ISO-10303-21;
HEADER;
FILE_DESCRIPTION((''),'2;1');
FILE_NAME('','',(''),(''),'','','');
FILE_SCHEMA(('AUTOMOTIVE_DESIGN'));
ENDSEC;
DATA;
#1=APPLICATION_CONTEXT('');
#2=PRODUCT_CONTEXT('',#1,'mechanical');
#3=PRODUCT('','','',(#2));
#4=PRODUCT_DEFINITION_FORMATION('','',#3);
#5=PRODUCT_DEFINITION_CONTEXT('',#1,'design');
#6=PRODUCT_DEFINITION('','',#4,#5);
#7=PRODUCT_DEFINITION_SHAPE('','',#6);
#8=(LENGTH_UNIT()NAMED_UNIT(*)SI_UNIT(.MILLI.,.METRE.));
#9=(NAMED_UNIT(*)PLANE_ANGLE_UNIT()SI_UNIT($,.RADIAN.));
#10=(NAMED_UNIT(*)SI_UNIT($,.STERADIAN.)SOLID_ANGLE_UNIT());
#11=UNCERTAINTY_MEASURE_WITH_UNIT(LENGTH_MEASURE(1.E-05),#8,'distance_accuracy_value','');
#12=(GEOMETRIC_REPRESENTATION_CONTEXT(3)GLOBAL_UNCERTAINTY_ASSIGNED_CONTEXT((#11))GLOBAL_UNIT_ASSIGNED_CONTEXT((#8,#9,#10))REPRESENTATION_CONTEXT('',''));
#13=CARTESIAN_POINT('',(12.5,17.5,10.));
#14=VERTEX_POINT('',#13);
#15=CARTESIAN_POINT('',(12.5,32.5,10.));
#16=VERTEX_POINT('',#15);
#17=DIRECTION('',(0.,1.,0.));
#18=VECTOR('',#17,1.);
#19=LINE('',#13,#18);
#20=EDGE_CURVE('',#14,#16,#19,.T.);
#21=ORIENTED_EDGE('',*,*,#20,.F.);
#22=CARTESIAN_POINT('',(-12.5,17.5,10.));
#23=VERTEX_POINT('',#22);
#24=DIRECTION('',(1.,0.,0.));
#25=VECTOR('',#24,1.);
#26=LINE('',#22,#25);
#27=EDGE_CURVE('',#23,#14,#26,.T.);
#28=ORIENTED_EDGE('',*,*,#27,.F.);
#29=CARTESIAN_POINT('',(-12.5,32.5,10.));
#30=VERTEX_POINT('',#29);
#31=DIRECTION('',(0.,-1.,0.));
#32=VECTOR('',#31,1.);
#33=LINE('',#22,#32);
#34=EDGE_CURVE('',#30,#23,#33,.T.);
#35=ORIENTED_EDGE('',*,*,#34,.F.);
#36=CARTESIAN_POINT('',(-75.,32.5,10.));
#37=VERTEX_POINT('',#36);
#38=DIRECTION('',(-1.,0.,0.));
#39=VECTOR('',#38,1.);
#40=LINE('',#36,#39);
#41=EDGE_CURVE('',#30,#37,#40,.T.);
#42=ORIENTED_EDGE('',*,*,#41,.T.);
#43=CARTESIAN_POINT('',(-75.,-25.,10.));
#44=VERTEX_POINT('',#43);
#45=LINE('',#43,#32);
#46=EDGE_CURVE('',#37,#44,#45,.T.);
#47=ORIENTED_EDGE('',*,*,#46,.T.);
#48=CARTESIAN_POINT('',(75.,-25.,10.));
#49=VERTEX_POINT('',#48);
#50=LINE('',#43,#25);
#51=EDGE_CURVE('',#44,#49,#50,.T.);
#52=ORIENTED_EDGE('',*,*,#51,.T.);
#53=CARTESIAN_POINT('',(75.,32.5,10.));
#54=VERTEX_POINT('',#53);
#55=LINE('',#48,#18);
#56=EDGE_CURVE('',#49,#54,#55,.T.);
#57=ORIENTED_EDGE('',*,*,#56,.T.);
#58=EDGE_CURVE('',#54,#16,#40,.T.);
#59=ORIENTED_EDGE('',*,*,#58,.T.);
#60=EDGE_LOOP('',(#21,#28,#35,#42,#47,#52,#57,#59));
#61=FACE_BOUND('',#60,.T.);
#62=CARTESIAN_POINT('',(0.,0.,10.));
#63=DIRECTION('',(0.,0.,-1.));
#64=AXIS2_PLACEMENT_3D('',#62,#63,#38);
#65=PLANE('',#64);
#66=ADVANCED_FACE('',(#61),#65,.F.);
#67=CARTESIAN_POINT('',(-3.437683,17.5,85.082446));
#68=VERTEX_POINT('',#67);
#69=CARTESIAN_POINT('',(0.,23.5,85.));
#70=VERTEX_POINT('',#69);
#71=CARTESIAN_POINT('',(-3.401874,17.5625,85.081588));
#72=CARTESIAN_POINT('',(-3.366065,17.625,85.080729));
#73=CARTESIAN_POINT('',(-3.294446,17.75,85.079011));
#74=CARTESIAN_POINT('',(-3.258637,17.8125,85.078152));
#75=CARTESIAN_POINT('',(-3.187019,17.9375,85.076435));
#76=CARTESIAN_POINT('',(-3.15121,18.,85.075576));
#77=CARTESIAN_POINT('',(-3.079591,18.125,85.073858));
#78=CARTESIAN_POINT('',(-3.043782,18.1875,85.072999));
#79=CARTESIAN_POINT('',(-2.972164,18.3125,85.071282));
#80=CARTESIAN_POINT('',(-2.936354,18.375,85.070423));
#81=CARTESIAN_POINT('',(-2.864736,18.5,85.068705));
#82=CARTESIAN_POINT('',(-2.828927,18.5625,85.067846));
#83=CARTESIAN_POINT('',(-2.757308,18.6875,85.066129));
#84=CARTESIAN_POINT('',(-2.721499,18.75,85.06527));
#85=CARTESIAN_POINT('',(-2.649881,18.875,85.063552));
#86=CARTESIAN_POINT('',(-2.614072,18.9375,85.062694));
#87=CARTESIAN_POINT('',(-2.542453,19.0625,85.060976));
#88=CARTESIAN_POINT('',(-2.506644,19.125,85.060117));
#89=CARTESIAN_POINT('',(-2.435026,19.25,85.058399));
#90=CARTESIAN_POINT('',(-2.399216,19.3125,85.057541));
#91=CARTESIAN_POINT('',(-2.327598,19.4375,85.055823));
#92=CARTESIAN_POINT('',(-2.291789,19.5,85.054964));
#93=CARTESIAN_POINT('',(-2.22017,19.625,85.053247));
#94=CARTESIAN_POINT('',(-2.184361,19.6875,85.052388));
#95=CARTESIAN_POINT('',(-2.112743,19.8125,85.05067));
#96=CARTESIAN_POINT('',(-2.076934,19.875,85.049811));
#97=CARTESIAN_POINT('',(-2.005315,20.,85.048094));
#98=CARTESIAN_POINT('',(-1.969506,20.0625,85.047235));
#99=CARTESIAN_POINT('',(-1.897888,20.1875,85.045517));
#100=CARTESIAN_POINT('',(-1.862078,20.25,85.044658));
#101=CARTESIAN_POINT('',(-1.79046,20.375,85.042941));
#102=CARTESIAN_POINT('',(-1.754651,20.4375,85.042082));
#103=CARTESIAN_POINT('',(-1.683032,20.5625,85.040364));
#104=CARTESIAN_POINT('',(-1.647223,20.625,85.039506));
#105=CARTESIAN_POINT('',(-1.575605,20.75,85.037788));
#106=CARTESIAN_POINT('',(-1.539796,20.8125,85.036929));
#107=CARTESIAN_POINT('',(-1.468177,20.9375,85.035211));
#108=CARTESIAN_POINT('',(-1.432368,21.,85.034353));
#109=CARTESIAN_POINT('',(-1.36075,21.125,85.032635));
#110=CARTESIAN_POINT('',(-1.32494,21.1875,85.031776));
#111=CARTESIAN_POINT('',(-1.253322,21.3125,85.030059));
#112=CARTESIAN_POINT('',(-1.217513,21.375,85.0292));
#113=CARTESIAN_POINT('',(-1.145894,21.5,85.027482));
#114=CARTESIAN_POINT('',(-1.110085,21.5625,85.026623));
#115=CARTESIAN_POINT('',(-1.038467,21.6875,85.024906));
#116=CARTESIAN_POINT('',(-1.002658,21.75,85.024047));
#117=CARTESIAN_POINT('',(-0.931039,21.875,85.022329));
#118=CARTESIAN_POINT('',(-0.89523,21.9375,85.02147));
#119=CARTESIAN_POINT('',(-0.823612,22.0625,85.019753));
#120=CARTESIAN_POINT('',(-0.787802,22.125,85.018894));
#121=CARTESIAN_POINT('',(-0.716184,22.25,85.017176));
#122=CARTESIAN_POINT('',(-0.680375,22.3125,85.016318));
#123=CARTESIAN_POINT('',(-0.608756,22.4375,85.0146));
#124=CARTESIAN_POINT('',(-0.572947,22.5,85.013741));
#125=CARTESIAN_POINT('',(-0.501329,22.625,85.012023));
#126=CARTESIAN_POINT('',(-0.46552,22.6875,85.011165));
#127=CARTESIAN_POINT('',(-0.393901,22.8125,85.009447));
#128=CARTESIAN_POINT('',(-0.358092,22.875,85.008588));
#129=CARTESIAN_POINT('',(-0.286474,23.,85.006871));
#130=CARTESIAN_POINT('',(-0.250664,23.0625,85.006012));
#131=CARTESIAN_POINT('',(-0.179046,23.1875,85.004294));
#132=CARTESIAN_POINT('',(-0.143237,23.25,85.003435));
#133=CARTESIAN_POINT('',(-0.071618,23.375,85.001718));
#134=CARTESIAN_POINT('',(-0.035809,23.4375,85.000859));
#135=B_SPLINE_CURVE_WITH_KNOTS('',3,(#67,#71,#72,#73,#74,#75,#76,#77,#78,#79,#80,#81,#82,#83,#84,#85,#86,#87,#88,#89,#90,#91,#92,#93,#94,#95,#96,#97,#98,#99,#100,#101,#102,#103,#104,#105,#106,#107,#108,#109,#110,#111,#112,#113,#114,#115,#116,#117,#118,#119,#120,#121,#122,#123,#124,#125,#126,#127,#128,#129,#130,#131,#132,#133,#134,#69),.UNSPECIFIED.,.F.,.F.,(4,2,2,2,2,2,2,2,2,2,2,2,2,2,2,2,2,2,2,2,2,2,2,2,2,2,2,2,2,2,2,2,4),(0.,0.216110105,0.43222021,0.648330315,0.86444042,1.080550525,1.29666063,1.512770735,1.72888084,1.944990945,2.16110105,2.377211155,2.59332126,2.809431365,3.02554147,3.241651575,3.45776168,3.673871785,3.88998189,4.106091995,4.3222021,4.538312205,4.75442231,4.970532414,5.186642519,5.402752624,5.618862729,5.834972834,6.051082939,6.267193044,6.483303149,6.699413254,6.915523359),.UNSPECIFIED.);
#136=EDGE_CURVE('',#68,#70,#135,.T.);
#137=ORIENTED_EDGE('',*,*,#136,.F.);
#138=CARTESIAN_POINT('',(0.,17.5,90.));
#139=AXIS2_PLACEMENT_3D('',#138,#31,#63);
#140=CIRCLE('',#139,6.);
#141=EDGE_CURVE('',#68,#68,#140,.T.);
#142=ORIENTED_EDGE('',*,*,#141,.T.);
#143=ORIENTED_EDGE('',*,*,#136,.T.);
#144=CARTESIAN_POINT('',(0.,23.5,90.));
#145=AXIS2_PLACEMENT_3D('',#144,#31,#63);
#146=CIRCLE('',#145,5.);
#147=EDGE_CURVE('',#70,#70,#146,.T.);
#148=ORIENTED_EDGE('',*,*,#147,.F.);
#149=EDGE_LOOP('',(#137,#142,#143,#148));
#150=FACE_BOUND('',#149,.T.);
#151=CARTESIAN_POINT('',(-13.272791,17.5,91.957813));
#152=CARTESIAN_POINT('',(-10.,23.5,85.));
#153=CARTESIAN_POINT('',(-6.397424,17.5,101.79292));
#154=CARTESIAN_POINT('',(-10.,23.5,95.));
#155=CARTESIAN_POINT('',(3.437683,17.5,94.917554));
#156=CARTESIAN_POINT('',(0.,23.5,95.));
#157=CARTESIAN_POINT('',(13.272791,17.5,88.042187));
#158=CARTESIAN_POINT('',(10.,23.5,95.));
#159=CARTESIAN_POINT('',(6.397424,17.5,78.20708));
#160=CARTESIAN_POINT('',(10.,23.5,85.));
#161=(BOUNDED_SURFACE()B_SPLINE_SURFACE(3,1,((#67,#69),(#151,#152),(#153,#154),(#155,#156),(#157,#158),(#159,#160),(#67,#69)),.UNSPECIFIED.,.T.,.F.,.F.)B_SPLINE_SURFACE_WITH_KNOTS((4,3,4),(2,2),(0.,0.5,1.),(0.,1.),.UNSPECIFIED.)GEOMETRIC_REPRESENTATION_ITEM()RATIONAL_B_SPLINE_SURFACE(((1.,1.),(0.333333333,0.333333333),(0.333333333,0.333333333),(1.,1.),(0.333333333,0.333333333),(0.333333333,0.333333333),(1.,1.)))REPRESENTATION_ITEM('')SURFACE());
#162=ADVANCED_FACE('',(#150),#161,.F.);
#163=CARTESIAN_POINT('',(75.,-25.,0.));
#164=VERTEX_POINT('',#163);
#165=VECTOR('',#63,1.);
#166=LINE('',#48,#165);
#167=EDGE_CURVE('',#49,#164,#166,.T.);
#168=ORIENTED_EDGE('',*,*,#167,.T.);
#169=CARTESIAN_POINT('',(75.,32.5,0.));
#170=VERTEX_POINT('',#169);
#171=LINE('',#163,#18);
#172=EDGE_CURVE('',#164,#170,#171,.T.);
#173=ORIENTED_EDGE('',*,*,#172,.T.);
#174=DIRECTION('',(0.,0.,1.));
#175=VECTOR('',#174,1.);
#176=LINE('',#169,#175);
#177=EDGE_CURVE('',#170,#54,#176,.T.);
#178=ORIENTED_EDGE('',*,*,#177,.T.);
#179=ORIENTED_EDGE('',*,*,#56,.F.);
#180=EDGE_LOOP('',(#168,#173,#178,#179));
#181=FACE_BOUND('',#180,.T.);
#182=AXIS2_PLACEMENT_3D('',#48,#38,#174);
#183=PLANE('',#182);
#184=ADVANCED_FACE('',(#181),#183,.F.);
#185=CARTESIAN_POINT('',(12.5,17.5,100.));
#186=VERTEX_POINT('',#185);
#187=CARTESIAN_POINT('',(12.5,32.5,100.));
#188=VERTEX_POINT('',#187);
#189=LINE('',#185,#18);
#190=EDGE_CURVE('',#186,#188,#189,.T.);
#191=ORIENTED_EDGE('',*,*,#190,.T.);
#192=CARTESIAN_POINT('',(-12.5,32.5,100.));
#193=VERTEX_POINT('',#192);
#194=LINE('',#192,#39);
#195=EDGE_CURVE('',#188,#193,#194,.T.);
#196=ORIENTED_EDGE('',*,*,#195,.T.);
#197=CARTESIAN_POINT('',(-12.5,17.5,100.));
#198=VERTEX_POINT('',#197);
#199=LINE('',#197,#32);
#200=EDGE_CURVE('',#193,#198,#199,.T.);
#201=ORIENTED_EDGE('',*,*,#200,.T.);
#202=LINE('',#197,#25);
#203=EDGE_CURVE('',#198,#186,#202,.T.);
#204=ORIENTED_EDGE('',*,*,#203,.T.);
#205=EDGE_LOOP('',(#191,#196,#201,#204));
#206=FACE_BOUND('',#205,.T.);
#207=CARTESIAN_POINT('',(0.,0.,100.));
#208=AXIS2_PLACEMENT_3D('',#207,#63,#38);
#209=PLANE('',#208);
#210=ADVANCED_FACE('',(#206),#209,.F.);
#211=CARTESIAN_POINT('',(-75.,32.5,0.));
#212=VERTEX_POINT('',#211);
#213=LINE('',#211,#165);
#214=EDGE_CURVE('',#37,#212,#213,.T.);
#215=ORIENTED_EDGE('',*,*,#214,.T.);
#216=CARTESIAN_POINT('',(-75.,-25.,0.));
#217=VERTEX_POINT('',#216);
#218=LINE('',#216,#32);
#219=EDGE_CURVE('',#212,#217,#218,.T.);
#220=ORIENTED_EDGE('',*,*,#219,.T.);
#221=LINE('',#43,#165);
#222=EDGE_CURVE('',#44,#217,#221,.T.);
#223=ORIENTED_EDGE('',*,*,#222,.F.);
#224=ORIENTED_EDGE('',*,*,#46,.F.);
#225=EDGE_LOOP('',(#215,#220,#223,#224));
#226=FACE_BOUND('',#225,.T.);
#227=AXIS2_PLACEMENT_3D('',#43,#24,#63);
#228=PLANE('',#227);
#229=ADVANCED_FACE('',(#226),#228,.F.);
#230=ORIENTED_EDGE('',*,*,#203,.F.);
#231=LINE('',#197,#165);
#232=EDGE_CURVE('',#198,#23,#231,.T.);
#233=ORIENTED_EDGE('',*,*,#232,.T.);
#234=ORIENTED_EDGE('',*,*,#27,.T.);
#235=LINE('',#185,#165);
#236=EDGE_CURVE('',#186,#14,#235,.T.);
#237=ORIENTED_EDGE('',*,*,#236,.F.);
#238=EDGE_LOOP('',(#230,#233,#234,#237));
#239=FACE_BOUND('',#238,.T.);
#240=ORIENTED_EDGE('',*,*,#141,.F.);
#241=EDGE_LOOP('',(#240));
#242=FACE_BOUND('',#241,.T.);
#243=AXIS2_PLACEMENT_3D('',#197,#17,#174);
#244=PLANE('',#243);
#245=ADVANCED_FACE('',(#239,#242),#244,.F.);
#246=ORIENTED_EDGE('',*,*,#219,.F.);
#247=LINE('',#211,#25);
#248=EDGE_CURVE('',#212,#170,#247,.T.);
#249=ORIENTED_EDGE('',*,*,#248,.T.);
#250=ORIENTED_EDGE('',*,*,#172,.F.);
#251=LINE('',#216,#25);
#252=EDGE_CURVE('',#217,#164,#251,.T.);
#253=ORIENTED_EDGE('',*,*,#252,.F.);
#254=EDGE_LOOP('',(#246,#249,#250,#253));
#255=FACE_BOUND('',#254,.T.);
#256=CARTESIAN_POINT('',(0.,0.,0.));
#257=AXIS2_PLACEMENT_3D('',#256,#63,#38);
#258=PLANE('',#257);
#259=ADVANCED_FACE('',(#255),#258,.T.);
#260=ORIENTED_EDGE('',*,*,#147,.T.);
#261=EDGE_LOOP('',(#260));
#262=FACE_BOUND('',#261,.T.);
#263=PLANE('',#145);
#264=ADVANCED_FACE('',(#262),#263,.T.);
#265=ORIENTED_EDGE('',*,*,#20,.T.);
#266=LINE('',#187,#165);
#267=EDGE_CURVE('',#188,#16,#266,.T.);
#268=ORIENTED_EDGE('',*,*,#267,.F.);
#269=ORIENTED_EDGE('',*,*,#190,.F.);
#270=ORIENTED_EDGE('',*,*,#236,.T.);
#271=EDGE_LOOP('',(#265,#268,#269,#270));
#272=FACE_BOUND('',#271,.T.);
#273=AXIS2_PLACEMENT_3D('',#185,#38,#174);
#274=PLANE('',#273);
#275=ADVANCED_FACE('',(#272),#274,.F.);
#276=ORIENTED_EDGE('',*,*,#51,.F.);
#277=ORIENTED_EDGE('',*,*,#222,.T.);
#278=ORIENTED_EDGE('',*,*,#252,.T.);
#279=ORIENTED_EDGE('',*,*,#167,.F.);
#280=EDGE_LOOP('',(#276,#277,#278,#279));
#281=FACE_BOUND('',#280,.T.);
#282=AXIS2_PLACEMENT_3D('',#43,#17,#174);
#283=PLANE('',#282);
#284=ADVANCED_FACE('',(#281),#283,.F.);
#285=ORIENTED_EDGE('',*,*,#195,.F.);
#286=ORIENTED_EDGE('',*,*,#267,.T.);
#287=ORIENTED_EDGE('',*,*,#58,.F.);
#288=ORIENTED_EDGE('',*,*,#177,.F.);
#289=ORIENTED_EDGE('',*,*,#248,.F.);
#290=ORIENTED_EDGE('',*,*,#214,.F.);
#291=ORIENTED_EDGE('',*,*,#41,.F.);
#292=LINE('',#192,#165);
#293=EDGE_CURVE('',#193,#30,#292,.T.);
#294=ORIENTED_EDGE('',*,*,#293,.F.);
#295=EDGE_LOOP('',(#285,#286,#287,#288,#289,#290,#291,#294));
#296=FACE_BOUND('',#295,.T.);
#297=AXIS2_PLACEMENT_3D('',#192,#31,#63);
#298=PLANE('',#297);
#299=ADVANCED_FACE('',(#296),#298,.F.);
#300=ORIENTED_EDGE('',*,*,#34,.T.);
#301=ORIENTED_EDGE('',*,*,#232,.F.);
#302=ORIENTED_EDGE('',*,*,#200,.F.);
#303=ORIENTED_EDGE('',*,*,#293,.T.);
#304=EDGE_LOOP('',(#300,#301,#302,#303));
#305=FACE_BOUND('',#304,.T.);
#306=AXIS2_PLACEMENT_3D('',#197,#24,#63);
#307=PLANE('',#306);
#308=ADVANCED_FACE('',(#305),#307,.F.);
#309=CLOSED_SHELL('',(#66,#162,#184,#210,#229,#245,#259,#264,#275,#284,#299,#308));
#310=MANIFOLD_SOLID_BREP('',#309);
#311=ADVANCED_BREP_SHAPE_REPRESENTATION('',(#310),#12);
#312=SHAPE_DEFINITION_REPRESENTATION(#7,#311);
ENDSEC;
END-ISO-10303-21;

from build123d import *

# Parameters (mm, degrees)
SKETCH1_W           = 150
SKETCH1_H           = 50
BOSS_EXTRUDE1_DEPTH = 10
SKETCH2_W           = 25
SKETCH2_H           = 15
BOSS_EXTRUDE2_DEPTH = 90
SKETCH5_W           = 150
SKETCH5_H           = 10
BOSS_EXTRUDE3_DEPTH = 7.5


with BuildPart() as part:
    # Sketch1 → Boss-Extrude1 (new body)
    with BuildSketch(Plane.XY):
        Rectangle(SKETCH1_W, SKETCH1_H)
    extrude(amount=BOSS_EXTRUDE1_DEPTH)

    # Sketch2 → Boss-Extrude2 (add)
    with BuildSketch(Plane.XY.offset(10)):
        with Locations((0, 25)):
            Rectangle(SKETCH2_W, SKETCH2_H)
    extrude(amount=BOSS_EXTRUDE2_DEPTH)

    # Cut-Loft3: read off the stored shape, not the designer's step
    # Cut-Loft3: loft between two sections, ruled curve by curve
    cut_loft3_from = [
        Edge.make_bspline([(-3.437683222, 17.5, 85.082446333), (-13.272790555, 17.5, 91.957812777), (-6.397424111, 17.5, 101.792920111), (3.437683222, 17.5, 94.917553667), (13.272790555, 17.5, 88.042187223), (6.397424111, 17.5, 78.207079889), (-3.437683222, 17.5, 85.082446333)], [0, 0, 0, 0, 0.5, 0.5, 0.5, 1, 1, 1, 1], 3, [1, 0.333333333, 0.333333333, 1, 0.333333333, 0.333333333, 1]),
    ]
    cut_loft3_to = [
        Edge.make_bspline([(0, 23.5, 85), (-10, 23.5, 85), (-10, 23.5, 95), (0, 23.5, 95), (10, 23.5, 95), (10, 23.5, 85), (0, 23.5, 85)], [0, 0, 0, 0, 0.5, 0.5, 0.5, 1, 1, 1, 1], 3, [1, 0.333333333, 0.333333333, 1, 0.333333333, 0.333333333, 1]),
    ]
    cut_loft3 = Solid(Shell([*[Face.make_surface_from_curves(cut_loft3_from[k], cut_loft3_to[k]) for k in range(1)], Face(Wire(cut_loft3_from)), Face(Wire(cut_loft3_to))]))
    add(cut_loft3, mode=Mode.SUBTRACT)

    # Sketch5 → Boss-Extrude3 (add)
    with BuildSketch(Plane(origin=(0, 25, 0), x_dir=(1, 0, 0), z_dir=(0, 1, 0))):
        with Locations((0, -5)):
            Rectangle(SKETCH5_W, SKETCH5_H)
    extrude(amount=BOSS_EXTRUDE3_DEPTH)


solid = part.part
